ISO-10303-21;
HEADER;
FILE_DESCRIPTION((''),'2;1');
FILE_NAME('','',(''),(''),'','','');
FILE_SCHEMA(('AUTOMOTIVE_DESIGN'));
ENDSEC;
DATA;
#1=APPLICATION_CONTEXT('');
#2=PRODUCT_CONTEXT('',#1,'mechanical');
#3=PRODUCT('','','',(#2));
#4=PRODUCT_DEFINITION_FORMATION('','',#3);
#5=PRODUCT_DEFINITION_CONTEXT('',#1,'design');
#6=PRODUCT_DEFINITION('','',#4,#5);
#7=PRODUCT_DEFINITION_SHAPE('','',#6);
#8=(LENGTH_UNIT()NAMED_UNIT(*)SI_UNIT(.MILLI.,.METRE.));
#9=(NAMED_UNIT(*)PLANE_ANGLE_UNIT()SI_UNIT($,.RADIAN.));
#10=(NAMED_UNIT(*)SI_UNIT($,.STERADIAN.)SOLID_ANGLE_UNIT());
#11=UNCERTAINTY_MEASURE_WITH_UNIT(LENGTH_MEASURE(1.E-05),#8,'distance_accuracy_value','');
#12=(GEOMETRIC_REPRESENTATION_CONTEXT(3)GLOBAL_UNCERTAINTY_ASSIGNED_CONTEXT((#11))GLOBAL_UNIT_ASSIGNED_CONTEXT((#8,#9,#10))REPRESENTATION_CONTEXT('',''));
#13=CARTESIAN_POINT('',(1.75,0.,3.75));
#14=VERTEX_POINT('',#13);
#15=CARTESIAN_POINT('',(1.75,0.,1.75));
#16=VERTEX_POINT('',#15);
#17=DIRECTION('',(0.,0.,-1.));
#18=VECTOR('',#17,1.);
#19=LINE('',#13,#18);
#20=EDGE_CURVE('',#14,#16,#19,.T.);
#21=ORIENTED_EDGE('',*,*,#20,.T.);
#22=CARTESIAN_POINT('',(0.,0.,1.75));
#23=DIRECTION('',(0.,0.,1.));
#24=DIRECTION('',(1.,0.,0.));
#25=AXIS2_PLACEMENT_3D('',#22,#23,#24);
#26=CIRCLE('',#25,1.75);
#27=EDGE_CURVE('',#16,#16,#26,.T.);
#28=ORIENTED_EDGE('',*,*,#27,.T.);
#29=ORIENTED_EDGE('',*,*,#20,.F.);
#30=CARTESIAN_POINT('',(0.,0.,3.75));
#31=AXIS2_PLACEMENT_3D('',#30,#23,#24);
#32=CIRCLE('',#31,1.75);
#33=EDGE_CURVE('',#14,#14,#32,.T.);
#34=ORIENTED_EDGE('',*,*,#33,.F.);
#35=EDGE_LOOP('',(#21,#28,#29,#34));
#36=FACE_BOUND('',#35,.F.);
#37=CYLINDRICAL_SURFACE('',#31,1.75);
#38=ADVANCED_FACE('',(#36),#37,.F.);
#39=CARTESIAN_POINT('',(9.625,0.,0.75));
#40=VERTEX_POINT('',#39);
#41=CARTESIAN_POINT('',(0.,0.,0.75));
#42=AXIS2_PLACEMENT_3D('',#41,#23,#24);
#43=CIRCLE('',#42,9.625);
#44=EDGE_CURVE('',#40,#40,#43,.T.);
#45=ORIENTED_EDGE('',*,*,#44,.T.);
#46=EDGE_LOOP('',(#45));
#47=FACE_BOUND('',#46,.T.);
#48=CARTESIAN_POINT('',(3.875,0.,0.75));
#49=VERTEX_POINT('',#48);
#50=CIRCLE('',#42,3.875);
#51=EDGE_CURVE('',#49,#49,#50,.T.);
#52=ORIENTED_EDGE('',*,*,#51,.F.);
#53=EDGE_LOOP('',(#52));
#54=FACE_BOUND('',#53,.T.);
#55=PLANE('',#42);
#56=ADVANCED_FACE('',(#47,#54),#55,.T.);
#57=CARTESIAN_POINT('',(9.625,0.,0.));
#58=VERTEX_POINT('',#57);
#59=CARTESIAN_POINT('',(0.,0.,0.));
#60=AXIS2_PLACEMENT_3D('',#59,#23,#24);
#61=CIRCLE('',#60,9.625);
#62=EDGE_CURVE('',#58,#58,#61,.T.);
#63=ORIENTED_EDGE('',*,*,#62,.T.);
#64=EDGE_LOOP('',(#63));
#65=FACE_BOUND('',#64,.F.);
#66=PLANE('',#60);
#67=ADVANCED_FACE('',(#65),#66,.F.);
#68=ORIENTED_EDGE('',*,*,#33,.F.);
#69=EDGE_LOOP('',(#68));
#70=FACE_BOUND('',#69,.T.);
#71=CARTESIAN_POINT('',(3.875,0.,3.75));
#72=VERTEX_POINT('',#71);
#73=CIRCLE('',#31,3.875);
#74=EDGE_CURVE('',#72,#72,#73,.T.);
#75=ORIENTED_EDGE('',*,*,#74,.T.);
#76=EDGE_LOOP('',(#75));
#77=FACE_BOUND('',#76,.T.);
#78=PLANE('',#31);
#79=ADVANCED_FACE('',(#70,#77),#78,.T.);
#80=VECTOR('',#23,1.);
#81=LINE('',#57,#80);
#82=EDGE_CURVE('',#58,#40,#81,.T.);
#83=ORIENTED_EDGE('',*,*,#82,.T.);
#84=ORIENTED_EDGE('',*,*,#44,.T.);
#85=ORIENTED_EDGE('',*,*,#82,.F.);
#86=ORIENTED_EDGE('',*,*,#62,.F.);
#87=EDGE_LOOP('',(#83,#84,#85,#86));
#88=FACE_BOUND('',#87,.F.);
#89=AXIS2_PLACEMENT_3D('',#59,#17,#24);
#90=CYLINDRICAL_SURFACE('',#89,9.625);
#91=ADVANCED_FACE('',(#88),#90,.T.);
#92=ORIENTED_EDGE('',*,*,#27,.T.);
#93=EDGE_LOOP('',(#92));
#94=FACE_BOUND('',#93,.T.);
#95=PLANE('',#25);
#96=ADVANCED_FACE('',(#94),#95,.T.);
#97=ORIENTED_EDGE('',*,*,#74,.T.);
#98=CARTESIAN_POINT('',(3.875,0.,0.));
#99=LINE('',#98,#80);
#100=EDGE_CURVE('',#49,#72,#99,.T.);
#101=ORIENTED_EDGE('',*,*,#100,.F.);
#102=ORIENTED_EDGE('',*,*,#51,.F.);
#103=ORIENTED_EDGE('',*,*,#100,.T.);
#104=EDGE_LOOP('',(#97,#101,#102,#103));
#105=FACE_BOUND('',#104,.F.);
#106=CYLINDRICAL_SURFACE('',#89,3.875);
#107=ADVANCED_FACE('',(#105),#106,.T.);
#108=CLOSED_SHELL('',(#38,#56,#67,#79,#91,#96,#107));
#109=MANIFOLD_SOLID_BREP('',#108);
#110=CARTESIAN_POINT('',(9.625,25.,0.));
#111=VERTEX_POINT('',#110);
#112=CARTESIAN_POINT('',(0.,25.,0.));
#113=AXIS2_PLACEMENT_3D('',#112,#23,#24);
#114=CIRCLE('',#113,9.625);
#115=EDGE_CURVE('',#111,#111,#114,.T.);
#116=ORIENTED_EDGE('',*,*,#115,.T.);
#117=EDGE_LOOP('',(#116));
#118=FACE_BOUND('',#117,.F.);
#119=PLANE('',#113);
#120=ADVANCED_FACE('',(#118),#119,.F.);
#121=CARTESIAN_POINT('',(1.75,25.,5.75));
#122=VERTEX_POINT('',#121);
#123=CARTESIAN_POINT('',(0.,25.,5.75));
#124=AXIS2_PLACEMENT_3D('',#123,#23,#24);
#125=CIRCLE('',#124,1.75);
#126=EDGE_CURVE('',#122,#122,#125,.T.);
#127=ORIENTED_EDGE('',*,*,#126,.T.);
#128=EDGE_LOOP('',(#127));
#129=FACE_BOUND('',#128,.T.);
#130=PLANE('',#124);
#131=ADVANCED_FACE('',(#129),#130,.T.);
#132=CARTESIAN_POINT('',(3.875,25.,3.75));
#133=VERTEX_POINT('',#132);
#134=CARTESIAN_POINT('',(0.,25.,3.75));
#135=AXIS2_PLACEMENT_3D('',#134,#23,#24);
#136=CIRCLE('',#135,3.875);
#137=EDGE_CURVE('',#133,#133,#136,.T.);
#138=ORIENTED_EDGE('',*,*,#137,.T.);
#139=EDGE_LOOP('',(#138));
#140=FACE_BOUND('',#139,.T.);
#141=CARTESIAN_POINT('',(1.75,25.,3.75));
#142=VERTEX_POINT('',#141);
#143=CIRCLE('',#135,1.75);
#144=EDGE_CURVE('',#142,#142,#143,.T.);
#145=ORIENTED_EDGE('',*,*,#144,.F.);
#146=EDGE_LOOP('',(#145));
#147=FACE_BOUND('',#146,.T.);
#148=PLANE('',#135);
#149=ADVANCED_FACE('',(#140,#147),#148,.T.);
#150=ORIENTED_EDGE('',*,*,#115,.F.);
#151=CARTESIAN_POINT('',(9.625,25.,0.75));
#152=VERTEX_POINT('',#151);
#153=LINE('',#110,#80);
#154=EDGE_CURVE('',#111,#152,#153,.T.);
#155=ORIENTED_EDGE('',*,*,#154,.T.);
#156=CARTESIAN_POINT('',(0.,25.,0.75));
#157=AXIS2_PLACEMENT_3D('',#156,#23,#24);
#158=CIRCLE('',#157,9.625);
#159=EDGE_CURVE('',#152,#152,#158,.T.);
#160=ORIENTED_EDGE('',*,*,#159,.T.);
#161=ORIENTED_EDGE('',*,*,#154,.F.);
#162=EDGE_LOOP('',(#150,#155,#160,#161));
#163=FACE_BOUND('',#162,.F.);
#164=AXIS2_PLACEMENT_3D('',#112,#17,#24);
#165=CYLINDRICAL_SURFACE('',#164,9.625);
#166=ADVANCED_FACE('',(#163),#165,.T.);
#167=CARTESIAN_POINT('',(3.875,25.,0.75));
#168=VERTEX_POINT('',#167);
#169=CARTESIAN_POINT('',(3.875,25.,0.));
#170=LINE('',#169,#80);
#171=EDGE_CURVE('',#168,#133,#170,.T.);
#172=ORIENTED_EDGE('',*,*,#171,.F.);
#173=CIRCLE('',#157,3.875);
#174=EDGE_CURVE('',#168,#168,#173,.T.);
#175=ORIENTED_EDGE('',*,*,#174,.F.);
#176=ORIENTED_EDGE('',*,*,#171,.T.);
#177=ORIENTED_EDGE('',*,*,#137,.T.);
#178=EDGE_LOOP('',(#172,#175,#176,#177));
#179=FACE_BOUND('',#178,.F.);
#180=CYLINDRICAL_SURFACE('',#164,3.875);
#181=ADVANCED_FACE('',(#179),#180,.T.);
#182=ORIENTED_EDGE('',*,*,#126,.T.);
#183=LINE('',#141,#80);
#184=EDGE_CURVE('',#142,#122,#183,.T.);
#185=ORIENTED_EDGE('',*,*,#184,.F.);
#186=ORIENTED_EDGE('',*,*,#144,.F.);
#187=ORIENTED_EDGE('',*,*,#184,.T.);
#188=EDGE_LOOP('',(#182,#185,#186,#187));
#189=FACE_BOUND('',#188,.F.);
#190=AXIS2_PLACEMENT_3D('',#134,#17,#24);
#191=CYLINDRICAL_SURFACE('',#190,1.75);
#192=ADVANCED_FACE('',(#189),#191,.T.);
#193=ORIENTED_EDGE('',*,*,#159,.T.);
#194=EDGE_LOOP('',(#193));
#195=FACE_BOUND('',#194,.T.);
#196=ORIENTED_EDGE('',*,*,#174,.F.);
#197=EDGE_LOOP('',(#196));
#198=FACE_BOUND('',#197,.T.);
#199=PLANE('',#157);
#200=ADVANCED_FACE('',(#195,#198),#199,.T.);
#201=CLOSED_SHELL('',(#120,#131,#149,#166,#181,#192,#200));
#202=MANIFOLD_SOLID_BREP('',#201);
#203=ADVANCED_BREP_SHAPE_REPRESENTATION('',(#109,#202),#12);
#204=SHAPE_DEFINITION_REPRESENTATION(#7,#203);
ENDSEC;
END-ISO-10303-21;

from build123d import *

# Parameters (mm, degrees)
F0_R     = 9.625
F0_R_2   = 3.875
F1_DEPTH = 0.75
F2_DEPTH = 3.75
F4_R     = 1.75
F5_DEPTH = 2
F6_DEPTH = 2


with BuildPart() as f1:
    # F0 (on Top) → F1 (new body)
    with BuildSketch(Plane.XY):
        Circle(F0_R)
        Circle(F0_R_2, mode=Mode.SUBTRACT)
    extrude(amount=F1_DEPTH)

    # F0 (on Top) → F2 (join)
    with BuildSketch(Plane.XY):
        Circle(F0_R_2)
    extrude(amount=F2_DEPTH)


with BuildPart() as f3_1:
    # F3: copy of F1
    add(f1.part.moved(Location((0, 25, 0))))

    # F4 (on face) → F5 (join)
    with BuildSketch(Plane.XY.offset(3.75)):
        with Locations((0, 25)):
            Circle(F4_R)
    extrude(amount=F5_DEPTH)


with BuildPart() as f1_1:
    add(f1.part)

    # F4 (on face) → F6 (cut)
    with BuildSketch(Plane.XY.offset(3.75)):
        Circle(F4_R)
    extrude(amount=-F6_DEPTH, mode=Mode.SUBTRACT)


solid = Compound([f3_1.part, f1_1.part])
